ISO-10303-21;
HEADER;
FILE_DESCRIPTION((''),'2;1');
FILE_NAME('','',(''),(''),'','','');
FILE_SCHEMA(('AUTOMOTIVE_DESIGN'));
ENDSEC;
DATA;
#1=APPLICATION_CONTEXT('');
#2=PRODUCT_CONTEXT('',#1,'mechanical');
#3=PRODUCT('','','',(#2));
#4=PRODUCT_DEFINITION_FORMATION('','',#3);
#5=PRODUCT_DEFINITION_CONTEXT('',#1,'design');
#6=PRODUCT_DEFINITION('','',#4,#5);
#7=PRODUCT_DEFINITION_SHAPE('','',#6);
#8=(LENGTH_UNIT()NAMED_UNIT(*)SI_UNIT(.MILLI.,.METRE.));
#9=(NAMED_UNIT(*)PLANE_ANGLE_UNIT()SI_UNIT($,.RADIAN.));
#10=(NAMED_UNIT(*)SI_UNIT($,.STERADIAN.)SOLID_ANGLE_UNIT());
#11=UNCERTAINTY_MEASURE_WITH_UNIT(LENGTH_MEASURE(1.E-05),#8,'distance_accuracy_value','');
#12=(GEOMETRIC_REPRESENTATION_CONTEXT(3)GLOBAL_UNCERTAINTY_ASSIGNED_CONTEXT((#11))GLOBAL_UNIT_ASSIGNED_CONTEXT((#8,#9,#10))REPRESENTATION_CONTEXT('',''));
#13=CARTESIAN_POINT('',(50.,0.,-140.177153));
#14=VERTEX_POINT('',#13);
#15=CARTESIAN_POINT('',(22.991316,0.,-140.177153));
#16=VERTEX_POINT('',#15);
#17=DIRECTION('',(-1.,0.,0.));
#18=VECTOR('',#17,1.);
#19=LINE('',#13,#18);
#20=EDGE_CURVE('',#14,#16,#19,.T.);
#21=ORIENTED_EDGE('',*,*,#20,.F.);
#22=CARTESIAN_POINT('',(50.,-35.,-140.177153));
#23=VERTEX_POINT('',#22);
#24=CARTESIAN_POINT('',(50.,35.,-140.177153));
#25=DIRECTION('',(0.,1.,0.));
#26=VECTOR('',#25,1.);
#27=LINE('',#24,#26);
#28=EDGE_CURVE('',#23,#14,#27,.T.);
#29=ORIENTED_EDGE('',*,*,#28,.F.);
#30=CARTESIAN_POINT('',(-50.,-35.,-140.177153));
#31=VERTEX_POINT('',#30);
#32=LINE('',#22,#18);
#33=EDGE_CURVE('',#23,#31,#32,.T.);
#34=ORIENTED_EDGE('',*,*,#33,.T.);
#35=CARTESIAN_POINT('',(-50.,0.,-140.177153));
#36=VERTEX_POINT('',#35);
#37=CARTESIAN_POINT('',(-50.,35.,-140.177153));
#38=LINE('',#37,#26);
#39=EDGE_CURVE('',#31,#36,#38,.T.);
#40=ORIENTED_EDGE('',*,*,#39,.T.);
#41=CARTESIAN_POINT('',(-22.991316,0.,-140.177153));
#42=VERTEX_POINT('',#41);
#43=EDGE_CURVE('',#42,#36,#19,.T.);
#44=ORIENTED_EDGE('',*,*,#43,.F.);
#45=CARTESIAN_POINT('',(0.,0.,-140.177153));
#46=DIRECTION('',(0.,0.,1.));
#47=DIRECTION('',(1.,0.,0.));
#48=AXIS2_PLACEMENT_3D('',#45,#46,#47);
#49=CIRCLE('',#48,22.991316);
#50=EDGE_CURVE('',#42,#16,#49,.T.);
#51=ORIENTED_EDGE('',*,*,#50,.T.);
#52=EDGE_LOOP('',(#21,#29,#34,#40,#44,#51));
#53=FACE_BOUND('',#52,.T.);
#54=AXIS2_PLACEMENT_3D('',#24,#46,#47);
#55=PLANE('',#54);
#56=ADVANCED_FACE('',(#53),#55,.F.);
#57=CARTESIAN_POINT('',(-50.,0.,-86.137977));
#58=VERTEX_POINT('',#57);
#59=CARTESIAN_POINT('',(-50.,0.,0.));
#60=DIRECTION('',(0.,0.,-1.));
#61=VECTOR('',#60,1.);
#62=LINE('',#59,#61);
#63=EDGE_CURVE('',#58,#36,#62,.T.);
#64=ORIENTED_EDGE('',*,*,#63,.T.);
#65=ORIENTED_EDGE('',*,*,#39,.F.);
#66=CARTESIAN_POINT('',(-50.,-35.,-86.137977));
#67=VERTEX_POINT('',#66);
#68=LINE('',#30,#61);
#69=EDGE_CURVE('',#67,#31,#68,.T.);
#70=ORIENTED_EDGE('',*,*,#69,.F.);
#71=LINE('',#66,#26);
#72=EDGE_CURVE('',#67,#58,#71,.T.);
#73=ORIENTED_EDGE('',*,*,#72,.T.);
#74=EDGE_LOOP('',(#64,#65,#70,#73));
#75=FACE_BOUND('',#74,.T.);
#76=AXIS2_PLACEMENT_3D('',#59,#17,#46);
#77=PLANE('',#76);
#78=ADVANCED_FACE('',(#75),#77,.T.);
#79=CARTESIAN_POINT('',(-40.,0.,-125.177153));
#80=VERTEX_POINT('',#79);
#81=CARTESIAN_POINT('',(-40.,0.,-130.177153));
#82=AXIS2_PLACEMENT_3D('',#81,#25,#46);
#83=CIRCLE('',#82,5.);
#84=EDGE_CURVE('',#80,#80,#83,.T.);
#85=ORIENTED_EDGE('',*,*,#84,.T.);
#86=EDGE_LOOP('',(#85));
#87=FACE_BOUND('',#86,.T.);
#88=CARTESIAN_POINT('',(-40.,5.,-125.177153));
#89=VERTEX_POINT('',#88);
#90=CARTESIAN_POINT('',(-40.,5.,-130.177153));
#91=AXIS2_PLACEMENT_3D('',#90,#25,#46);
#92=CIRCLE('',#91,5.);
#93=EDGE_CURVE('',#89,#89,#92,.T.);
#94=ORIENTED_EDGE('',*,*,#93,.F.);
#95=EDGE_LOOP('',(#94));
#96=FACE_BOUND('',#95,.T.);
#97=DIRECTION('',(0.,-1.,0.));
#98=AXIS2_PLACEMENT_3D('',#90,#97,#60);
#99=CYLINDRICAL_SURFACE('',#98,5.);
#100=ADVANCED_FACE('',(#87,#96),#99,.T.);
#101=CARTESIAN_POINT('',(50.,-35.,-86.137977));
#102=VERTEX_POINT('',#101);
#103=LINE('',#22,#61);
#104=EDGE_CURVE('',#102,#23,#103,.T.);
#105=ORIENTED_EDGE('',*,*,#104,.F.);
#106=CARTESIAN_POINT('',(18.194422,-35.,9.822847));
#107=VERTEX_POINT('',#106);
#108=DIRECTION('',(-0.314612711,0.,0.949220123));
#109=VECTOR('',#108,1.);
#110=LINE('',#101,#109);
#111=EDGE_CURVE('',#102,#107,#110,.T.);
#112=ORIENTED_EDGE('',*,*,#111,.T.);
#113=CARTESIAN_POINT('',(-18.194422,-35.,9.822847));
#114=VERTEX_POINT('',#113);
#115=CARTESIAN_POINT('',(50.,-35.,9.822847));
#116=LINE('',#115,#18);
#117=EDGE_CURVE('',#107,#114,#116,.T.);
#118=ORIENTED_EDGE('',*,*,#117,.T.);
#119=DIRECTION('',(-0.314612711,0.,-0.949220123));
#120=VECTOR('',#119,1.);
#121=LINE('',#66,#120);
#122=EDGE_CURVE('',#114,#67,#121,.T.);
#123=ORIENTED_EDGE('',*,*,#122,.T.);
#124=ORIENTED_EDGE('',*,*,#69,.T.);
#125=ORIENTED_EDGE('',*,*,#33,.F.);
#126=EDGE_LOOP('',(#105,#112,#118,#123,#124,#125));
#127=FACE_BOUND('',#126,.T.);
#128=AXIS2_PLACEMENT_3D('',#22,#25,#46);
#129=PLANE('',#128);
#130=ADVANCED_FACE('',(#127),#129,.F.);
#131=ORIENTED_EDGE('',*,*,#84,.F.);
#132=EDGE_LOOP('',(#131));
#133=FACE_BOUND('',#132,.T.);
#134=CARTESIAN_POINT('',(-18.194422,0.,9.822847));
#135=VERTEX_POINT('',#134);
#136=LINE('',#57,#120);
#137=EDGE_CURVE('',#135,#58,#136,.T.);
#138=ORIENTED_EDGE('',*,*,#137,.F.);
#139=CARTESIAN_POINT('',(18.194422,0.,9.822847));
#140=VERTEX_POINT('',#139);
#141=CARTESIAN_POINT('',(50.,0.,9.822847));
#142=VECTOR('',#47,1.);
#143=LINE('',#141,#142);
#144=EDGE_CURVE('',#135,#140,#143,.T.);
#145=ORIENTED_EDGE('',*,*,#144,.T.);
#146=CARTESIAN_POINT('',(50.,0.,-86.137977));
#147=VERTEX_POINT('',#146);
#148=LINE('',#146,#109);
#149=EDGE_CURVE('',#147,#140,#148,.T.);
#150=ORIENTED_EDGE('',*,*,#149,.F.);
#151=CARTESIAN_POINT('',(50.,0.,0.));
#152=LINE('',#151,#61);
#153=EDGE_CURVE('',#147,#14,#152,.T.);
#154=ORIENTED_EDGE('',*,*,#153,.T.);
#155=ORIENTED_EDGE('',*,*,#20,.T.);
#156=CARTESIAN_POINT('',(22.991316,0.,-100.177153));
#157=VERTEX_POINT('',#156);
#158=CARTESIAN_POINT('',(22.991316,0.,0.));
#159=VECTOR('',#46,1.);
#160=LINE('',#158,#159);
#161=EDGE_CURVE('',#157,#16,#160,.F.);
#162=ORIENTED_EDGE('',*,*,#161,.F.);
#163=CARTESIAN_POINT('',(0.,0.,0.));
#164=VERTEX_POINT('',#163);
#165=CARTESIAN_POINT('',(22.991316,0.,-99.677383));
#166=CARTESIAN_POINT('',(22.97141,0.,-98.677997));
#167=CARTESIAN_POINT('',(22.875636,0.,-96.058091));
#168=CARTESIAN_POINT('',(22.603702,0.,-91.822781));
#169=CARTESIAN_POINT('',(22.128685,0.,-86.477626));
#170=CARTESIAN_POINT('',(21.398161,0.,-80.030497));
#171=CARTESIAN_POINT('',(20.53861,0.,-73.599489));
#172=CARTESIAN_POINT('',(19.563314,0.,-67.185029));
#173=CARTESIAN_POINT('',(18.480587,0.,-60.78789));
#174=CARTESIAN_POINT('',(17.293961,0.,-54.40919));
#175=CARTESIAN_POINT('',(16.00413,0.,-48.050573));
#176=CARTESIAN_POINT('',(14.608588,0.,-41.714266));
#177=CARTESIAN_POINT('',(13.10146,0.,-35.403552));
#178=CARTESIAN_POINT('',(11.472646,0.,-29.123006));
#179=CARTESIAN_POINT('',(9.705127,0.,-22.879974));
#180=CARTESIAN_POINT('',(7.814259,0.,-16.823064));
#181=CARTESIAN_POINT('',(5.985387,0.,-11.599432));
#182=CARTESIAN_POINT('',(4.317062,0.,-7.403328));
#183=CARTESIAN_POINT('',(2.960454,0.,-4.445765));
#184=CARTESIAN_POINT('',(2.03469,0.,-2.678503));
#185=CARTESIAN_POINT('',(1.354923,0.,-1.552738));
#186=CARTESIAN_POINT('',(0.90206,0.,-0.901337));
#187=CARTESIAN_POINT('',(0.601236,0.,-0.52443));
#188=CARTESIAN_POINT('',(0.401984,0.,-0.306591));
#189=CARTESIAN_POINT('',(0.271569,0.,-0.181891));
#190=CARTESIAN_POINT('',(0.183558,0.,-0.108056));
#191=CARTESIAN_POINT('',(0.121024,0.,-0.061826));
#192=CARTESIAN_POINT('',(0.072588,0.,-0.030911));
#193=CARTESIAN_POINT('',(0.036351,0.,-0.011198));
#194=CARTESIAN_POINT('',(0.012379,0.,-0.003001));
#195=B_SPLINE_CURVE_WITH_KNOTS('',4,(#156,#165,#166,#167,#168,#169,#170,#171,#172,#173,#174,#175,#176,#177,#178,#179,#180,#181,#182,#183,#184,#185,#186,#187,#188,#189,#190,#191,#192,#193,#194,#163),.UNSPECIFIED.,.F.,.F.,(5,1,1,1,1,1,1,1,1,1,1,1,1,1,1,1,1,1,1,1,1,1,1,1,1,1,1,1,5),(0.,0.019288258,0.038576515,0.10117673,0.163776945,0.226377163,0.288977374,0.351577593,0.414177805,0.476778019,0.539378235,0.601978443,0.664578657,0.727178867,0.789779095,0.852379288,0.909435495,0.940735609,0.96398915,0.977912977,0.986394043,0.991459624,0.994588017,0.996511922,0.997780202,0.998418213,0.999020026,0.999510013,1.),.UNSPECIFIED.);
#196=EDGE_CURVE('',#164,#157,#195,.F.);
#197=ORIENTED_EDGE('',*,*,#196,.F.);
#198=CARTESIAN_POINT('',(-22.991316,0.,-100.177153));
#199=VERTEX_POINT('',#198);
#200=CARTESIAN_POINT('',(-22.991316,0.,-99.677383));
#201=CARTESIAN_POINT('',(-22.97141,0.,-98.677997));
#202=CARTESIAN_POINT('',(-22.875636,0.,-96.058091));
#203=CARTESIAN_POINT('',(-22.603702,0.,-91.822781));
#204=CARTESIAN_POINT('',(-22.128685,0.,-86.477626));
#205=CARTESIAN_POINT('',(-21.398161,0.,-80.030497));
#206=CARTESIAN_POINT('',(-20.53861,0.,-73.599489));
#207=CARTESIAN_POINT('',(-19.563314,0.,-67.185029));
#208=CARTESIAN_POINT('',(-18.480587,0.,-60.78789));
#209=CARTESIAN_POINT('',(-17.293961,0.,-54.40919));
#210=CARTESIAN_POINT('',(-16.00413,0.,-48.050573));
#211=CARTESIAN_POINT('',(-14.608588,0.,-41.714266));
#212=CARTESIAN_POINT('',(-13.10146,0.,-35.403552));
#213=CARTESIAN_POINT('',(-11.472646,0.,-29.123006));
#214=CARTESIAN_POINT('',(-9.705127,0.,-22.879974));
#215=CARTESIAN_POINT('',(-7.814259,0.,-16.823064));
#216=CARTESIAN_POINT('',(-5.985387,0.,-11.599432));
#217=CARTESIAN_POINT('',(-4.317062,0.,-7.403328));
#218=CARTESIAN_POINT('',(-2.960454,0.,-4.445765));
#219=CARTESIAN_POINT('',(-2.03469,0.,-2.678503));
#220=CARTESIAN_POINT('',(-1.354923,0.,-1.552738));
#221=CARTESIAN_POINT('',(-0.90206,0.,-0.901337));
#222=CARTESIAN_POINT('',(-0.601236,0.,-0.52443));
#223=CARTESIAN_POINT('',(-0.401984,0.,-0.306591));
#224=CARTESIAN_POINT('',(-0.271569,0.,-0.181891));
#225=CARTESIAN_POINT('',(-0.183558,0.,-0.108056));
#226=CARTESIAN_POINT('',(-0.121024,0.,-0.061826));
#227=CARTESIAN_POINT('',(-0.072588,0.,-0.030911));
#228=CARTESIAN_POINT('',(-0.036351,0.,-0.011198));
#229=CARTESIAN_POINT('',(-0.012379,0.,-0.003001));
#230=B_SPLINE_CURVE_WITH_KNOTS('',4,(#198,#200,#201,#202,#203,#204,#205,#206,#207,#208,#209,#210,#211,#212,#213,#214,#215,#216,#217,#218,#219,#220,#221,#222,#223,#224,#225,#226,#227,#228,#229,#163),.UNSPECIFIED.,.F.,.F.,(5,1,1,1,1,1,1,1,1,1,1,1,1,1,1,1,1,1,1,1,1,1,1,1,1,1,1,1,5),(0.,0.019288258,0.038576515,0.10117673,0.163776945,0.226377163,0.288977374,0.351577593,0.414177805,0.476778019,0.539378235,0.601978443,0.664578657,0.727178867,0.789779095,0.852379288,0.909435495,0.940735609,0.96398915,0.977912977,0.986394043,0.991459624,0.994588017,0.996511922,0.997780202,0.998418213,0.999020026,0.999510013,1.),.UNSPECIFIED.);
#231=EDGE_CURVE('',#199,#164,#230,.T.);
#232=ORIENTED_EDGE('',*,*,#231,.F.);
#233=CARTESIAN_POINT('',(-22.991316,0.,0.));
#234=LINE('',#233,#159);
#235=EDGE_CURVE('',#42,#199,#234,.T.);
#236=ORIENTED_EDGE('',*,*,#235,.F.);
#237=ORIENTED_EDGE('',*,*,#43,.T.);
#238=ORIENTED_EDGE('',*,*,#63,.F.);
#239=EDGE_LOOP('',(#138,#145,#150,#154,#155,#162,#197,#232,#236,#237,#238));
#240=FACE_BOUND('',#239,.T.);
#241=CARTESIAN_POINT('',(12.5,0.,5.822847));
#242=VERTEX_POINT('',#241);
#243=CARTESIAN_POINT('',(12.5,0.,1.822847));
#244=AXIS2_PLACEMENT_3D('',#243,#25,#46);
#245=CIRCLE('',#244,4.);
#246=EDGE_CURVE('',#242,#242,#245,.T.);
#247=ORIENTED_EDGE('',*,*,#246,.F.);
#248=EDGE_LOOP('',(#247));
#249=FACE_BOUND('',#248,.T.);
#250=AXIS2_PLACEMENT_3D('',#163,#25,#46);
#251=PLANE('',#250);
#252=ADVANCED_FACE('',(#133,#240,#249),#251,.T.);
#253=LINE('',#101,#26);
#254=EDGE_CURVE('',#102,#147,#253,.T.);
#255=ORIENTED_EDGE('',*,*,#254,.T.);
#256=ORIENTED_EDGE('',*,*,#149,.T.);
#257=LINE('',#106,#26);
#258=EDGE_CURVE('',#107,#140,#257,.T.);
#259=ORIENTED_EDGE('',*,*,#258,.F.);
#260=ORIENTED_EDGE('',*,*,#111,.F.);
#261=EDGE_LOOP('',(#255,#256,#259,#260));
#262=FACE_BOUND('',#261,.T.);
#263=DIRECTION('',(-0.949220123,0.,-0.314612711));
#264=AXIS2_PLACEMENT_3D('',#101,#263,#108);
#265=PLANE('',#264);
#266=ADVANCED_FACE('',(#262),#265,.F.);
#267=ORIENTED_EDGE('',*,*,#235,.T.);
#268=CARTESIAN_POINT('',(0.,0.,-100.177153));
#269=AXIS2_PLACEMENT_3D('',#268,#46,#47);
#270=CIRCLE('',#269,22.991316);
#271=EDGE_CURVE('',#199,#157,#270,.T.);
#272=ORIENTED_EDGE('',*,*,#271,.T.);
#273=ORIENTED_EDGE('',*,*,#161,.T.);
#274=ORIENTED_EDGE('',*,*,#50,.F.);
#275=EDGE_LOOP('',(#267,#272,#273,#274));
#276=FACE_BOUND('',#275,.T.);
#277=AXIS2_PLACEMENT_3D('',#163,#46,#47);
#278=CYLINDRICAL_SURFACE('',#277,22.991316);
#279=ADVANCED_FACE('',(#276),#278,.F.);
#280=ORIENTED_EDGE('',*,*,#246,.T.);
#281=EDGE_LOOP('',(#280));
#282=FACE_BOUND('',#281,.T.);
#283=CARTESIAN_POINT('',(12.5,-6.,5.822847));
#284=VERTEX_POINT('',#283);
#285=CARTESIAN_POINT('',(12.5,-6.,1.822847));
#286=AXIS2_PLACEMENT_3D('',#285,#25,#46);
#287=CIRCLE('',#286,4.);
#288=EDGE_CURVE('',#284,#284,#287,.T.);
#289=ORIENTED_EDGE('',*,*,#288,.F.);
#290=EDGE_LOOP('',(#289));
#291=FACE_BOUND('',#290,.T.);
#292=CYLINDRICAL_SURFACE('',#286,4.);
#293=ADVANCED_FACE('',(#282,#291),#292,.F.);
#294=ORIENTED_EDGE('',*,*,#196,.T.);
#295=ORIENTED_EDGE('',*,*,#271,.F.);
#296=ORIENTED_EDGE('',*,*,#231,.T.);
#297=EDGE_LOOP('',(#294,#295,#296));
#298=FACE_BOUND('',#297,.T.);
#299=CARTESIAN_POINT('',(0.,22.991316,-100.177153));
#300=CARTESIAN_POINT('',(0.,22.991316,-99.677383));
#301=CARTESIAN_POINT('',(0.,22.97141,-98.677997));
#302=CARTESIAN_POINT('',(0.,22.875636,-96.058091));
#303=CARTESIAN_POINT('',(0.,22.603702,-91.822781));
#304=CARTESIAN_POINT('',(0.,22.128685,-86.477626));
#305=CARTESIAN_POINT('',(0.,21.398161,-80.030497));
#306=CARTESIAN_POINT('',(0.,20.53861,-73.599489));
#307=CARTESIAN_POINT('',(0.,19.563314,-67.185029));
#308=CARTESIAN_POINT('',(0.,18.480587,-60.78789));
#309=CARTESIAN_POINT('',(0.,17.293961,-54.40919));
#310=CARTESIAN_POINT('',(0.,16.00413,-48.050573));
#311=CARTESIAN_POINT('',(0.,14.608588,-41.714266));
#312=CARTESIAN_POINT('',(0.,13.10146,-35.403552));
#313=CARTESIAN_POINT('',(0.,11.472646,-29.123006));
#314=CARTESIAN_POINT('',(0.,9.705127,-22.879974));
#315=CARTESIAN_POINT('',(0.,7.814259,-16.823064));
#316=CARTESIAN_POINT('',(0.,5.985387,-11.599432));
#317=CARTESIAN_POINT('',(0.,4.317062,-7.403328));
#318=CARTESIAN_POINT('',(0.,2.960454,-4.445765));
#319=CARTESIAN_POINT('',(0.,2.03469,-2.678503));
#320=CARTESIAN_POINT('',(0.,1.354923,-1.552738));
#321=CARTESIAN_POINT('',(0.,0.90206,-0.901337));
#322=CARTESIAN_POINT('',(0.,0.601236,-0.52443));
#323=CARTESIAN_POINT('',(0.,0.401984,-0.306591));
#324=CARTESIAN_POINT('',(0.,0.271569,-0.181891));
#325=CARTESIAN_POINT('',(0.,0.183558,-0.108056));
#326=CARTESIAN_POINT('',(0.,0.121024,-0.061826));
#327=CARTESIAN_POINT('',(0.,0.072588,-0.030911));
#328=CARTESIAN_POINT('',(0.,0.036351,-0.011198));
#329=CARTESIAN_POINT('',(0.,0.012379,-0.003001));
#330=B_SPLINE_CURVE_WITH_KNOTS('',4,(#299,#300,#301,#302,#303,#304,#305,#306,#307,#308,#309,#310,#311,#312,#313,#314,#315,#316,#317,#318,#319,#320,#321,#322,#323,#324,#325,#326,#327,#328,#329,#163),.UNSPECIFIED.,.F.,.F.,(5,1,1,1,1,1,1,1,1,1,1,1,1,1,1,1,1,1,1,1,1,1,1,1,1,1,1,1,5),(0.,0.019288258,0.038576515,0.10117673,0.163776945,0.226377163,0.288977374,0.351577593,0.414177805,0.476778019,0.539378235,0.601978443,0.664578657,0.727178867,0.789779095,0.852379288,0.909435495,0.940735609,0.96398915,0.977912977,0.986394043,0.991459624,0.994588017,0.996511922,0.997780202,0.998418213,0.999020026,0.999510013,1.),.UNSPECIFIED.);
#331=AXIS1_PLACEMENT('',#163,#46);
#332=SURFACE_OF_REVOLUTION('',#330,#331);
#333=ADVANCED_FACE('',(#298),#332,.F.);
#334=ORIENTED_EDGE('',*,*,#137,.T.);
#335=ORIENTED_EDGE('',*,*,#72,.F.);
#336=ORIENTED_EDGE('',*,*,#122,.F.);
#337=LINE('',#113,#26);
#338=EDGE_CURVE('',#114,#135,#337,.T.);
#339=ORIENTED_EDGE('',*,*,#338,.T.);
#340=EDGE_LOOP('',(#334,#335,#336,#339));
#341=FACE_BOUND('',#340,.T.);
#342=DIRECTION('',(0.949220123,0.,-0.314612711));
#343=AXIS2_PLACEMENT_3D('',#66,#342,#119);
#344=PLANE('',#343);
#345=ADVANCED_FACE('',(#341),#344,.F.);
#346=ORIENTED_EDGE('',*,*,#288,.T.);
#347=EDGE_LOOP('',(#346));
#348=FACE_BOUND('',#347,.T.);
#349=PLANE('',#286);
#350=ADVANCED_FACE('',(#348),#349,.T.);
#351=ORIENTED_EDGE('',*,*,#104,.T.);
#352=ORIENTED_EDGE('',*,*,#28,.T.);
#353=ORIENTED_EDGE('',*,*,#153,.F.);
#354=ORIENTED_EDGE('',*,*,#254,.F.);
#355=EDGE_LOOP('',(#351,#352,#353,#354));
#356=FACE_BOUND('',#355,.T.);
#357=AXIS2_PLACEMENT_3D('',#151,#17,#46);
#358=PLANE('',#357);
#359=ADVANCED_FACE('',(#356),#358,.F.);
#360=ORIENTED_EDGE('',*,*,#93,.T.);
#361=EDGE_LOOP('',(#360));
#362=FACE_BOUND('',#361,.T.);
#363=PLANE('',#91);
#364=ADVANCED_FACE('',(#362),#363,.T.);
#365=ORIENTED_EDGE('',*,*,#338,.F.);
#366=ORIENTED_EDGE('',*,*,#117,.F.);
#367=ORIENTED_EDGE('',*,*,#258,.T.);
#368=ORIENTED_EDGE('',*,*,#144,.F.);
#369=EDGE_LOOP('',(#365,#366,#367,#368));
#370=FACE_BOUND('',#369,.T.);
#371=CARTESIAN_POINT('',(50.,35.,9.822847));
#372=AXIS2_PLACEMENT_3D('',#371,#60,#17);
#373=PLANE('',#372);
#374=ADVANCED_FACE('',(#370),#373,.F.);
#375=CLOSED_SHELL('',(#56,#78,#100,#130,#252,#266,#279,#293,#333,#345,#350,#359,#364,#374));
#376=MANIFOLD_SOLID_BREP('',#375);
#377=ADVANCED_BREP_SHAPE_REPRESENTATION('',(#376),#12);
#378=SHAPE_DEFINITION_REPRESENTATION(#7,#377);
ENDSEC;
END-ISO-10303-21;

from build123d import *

# Parameters (mm, degrees)
SKETCH2_W            = 150
SKETCH2_H            = 70
BOSS_EXTRUDE1_DEPTH  = 50
INTERSECT1_OUTLINE_W = 100
INTERSECT1_OUTLINE_H = 150
INTERSECT1_DEPTH     = 35
CUT_EXTRUDE1_DEPTH   = 153.887652053
SKETCH4_R            = 4
CUT_EXTRUDE3_DEPTH   = 6
SKETCH8_R            = 5
BOSS_EXTRUDE3_DEPTH  = 5


# Read off the part's stored shape, not the designer's step: Intersect1
with BuildPart() as part:
    # Sketch2 → Boss-Extrude1 (new, symmetric)
    with BuildSketch(Plane(origin=(0, 0, 0), x_dir=(0, 0, -1), z_dir=(1, 0, 0))):
        with Locations((65.177152604, 0)):
            Rectangle(SKETCH2_W, SKETCH2_H)
    extrude(amount=BOSS_EXTRUDE1_DEPTH, both=True)

    # Sketch1 → Cut-Revolve1 (revolve, cut)
    with BuildSketch(Plane(origin=(0, 0, 0), x_dir=(0, 0, -1), z_dir=(1, 0, 0)), mode=Mode.PRIVATE) as cut_revolve1_sk:
        with BuildLine():
            Line((140.177152604, 22.991315667), (100.177152604, 22.991315667))
            add(Edge.make_bspline(
                [(0, 0), (0.003001049, 0.012379499), (0.011197692, 0.036351162), (0.030910939, 0.072587893), (0.061826137, 0.121023529), (0.108056169, 0.183557631), (0.181890949, 0.271568579), (0.306591117, 0.401983994), (0.524430354, 0.601235581), (0.901337009, 0.902060291), (1.552737658, 1.35492318), (2.678502901, 2.03469009), (4.445764918, 2.96045388), (7.403328149, 4.31706154), (11.599431889, 5.985386832), (16.823063538, 7.814259146), (22.879973582, 9.705127394), (29.12300565, 11.472646372), (35.403551613, 13.101460315), (41.714266155, 14.60858848), (48.050573205, 16.004129586), (54.409190393, 17.293961353), (60.787889899, 18.480587367), (67.185029056, 19.563313869), (73.599488728, 20.538609835), (80.030497438, 21.398160754), (86.47762614, 22.128684831), (91.82278076, 22.603702016), (96.058091382, 22.875635683), (98.677996749, 22.971409991), (99.677383084, 22.991315667), (100.177152604, 22.991315667)],
                knots=[0, 0, 0, 0, 0, 0.000489987, 0.000979974, 0.001581787, 0.002219798, 0.003488078, 0.005411983, 0.008540376, 0.013605957, 0.022087023, 0.03601085, 0.059264391, 0.090564505, 0.147620712, 0.210220905, 0.272821133, 0.335421343, 0.398021557, 0.460621765, 0.523221981, 0.585822195, 0.648422407, 0.711022626, 0.773622837, 0.836223055, 0.89882327, 0.961423485, 0.980711742, 1, 1, 1, 1, 1], degree=4))
            Line((0, 0), (140.177152604, 0))
            Line((140.177152604, 0), (140.177152604, 22.991315667))
        make_face()
    revolve(cut_revolve1_sk.sketch.rotate(Axis((0, 0, 0), (0, 0, -1)), 90), axis=Axis((0, 0, 0), (0, 0, -1)), mode=Mode.SUBTRACT)

    # Intersect1 outline → Intersect1 (cut)
    with BuildSketch(Plane(origin=(0, 0, 0), x_dir=(1, 0, 0), z_dir=(0, 1, 0))):
        with Locations((0, 65.177152604)):
            Rectangle(INTERSECT1_OUTLINE_W, INTERSECT1_OUTLINE_H)
    extrude(amount=INTERSECT1_DEPTH, mode=Mode.SUBTRACT)

    # Sketch5 → Cut-Extrude1 (cut, through all)
    with BuildSketch(Plane(origin=(0, 0, 0), x_dir=(1, 0, 0), z_dir=(0, 1, 0))):
        Polygon((50, 86.137976919), (18.194421541, -9.822847396), (0, -21.198201401), (-18.194421541, -9.822847396), (-50, 86.137976919), (-75.365394844, 84.804131947), (-88.729692443, -46.913449713), (-13.099565549, -40.658440604), (76.90354762, -33.214709966), (74.65964276, 87.590776178), align=None)
    extrude(amount=-CUT_EXTRUDE1_DEPTH, mode=Mode.SUBTRACT)

    # Sketch4 → Cut-Extrude3 (cut)
    with BuildSketch(Plane(origin=(0, 0, 0), x_dir=(1, 0, 0), z_dir=(0, 1, 0))):
        with Locations(Location((12.5, -1.822847396, 0), (0, 0, 270))):
            Circle(SKETCH4_R)
    extrude(amount=-CUT_EXTRUDE3_DEPTH, mode=Mode.SUBTRACT)

    # Sketch8 → Boss-Extrude3 (add)
    with BuildSketch(Plane(origin=(0, 0, 0), x_dir=(1, 0, 0), z_dir=(0, 1, 0))):
        with Locations(Location((-40, 130.177152604, 0), (0, 0, 270))):
            Circle(SKETCH8_R)
    extrude(amount=BOSS_EXTRUDE3_DEPTH)


solid = part.part
